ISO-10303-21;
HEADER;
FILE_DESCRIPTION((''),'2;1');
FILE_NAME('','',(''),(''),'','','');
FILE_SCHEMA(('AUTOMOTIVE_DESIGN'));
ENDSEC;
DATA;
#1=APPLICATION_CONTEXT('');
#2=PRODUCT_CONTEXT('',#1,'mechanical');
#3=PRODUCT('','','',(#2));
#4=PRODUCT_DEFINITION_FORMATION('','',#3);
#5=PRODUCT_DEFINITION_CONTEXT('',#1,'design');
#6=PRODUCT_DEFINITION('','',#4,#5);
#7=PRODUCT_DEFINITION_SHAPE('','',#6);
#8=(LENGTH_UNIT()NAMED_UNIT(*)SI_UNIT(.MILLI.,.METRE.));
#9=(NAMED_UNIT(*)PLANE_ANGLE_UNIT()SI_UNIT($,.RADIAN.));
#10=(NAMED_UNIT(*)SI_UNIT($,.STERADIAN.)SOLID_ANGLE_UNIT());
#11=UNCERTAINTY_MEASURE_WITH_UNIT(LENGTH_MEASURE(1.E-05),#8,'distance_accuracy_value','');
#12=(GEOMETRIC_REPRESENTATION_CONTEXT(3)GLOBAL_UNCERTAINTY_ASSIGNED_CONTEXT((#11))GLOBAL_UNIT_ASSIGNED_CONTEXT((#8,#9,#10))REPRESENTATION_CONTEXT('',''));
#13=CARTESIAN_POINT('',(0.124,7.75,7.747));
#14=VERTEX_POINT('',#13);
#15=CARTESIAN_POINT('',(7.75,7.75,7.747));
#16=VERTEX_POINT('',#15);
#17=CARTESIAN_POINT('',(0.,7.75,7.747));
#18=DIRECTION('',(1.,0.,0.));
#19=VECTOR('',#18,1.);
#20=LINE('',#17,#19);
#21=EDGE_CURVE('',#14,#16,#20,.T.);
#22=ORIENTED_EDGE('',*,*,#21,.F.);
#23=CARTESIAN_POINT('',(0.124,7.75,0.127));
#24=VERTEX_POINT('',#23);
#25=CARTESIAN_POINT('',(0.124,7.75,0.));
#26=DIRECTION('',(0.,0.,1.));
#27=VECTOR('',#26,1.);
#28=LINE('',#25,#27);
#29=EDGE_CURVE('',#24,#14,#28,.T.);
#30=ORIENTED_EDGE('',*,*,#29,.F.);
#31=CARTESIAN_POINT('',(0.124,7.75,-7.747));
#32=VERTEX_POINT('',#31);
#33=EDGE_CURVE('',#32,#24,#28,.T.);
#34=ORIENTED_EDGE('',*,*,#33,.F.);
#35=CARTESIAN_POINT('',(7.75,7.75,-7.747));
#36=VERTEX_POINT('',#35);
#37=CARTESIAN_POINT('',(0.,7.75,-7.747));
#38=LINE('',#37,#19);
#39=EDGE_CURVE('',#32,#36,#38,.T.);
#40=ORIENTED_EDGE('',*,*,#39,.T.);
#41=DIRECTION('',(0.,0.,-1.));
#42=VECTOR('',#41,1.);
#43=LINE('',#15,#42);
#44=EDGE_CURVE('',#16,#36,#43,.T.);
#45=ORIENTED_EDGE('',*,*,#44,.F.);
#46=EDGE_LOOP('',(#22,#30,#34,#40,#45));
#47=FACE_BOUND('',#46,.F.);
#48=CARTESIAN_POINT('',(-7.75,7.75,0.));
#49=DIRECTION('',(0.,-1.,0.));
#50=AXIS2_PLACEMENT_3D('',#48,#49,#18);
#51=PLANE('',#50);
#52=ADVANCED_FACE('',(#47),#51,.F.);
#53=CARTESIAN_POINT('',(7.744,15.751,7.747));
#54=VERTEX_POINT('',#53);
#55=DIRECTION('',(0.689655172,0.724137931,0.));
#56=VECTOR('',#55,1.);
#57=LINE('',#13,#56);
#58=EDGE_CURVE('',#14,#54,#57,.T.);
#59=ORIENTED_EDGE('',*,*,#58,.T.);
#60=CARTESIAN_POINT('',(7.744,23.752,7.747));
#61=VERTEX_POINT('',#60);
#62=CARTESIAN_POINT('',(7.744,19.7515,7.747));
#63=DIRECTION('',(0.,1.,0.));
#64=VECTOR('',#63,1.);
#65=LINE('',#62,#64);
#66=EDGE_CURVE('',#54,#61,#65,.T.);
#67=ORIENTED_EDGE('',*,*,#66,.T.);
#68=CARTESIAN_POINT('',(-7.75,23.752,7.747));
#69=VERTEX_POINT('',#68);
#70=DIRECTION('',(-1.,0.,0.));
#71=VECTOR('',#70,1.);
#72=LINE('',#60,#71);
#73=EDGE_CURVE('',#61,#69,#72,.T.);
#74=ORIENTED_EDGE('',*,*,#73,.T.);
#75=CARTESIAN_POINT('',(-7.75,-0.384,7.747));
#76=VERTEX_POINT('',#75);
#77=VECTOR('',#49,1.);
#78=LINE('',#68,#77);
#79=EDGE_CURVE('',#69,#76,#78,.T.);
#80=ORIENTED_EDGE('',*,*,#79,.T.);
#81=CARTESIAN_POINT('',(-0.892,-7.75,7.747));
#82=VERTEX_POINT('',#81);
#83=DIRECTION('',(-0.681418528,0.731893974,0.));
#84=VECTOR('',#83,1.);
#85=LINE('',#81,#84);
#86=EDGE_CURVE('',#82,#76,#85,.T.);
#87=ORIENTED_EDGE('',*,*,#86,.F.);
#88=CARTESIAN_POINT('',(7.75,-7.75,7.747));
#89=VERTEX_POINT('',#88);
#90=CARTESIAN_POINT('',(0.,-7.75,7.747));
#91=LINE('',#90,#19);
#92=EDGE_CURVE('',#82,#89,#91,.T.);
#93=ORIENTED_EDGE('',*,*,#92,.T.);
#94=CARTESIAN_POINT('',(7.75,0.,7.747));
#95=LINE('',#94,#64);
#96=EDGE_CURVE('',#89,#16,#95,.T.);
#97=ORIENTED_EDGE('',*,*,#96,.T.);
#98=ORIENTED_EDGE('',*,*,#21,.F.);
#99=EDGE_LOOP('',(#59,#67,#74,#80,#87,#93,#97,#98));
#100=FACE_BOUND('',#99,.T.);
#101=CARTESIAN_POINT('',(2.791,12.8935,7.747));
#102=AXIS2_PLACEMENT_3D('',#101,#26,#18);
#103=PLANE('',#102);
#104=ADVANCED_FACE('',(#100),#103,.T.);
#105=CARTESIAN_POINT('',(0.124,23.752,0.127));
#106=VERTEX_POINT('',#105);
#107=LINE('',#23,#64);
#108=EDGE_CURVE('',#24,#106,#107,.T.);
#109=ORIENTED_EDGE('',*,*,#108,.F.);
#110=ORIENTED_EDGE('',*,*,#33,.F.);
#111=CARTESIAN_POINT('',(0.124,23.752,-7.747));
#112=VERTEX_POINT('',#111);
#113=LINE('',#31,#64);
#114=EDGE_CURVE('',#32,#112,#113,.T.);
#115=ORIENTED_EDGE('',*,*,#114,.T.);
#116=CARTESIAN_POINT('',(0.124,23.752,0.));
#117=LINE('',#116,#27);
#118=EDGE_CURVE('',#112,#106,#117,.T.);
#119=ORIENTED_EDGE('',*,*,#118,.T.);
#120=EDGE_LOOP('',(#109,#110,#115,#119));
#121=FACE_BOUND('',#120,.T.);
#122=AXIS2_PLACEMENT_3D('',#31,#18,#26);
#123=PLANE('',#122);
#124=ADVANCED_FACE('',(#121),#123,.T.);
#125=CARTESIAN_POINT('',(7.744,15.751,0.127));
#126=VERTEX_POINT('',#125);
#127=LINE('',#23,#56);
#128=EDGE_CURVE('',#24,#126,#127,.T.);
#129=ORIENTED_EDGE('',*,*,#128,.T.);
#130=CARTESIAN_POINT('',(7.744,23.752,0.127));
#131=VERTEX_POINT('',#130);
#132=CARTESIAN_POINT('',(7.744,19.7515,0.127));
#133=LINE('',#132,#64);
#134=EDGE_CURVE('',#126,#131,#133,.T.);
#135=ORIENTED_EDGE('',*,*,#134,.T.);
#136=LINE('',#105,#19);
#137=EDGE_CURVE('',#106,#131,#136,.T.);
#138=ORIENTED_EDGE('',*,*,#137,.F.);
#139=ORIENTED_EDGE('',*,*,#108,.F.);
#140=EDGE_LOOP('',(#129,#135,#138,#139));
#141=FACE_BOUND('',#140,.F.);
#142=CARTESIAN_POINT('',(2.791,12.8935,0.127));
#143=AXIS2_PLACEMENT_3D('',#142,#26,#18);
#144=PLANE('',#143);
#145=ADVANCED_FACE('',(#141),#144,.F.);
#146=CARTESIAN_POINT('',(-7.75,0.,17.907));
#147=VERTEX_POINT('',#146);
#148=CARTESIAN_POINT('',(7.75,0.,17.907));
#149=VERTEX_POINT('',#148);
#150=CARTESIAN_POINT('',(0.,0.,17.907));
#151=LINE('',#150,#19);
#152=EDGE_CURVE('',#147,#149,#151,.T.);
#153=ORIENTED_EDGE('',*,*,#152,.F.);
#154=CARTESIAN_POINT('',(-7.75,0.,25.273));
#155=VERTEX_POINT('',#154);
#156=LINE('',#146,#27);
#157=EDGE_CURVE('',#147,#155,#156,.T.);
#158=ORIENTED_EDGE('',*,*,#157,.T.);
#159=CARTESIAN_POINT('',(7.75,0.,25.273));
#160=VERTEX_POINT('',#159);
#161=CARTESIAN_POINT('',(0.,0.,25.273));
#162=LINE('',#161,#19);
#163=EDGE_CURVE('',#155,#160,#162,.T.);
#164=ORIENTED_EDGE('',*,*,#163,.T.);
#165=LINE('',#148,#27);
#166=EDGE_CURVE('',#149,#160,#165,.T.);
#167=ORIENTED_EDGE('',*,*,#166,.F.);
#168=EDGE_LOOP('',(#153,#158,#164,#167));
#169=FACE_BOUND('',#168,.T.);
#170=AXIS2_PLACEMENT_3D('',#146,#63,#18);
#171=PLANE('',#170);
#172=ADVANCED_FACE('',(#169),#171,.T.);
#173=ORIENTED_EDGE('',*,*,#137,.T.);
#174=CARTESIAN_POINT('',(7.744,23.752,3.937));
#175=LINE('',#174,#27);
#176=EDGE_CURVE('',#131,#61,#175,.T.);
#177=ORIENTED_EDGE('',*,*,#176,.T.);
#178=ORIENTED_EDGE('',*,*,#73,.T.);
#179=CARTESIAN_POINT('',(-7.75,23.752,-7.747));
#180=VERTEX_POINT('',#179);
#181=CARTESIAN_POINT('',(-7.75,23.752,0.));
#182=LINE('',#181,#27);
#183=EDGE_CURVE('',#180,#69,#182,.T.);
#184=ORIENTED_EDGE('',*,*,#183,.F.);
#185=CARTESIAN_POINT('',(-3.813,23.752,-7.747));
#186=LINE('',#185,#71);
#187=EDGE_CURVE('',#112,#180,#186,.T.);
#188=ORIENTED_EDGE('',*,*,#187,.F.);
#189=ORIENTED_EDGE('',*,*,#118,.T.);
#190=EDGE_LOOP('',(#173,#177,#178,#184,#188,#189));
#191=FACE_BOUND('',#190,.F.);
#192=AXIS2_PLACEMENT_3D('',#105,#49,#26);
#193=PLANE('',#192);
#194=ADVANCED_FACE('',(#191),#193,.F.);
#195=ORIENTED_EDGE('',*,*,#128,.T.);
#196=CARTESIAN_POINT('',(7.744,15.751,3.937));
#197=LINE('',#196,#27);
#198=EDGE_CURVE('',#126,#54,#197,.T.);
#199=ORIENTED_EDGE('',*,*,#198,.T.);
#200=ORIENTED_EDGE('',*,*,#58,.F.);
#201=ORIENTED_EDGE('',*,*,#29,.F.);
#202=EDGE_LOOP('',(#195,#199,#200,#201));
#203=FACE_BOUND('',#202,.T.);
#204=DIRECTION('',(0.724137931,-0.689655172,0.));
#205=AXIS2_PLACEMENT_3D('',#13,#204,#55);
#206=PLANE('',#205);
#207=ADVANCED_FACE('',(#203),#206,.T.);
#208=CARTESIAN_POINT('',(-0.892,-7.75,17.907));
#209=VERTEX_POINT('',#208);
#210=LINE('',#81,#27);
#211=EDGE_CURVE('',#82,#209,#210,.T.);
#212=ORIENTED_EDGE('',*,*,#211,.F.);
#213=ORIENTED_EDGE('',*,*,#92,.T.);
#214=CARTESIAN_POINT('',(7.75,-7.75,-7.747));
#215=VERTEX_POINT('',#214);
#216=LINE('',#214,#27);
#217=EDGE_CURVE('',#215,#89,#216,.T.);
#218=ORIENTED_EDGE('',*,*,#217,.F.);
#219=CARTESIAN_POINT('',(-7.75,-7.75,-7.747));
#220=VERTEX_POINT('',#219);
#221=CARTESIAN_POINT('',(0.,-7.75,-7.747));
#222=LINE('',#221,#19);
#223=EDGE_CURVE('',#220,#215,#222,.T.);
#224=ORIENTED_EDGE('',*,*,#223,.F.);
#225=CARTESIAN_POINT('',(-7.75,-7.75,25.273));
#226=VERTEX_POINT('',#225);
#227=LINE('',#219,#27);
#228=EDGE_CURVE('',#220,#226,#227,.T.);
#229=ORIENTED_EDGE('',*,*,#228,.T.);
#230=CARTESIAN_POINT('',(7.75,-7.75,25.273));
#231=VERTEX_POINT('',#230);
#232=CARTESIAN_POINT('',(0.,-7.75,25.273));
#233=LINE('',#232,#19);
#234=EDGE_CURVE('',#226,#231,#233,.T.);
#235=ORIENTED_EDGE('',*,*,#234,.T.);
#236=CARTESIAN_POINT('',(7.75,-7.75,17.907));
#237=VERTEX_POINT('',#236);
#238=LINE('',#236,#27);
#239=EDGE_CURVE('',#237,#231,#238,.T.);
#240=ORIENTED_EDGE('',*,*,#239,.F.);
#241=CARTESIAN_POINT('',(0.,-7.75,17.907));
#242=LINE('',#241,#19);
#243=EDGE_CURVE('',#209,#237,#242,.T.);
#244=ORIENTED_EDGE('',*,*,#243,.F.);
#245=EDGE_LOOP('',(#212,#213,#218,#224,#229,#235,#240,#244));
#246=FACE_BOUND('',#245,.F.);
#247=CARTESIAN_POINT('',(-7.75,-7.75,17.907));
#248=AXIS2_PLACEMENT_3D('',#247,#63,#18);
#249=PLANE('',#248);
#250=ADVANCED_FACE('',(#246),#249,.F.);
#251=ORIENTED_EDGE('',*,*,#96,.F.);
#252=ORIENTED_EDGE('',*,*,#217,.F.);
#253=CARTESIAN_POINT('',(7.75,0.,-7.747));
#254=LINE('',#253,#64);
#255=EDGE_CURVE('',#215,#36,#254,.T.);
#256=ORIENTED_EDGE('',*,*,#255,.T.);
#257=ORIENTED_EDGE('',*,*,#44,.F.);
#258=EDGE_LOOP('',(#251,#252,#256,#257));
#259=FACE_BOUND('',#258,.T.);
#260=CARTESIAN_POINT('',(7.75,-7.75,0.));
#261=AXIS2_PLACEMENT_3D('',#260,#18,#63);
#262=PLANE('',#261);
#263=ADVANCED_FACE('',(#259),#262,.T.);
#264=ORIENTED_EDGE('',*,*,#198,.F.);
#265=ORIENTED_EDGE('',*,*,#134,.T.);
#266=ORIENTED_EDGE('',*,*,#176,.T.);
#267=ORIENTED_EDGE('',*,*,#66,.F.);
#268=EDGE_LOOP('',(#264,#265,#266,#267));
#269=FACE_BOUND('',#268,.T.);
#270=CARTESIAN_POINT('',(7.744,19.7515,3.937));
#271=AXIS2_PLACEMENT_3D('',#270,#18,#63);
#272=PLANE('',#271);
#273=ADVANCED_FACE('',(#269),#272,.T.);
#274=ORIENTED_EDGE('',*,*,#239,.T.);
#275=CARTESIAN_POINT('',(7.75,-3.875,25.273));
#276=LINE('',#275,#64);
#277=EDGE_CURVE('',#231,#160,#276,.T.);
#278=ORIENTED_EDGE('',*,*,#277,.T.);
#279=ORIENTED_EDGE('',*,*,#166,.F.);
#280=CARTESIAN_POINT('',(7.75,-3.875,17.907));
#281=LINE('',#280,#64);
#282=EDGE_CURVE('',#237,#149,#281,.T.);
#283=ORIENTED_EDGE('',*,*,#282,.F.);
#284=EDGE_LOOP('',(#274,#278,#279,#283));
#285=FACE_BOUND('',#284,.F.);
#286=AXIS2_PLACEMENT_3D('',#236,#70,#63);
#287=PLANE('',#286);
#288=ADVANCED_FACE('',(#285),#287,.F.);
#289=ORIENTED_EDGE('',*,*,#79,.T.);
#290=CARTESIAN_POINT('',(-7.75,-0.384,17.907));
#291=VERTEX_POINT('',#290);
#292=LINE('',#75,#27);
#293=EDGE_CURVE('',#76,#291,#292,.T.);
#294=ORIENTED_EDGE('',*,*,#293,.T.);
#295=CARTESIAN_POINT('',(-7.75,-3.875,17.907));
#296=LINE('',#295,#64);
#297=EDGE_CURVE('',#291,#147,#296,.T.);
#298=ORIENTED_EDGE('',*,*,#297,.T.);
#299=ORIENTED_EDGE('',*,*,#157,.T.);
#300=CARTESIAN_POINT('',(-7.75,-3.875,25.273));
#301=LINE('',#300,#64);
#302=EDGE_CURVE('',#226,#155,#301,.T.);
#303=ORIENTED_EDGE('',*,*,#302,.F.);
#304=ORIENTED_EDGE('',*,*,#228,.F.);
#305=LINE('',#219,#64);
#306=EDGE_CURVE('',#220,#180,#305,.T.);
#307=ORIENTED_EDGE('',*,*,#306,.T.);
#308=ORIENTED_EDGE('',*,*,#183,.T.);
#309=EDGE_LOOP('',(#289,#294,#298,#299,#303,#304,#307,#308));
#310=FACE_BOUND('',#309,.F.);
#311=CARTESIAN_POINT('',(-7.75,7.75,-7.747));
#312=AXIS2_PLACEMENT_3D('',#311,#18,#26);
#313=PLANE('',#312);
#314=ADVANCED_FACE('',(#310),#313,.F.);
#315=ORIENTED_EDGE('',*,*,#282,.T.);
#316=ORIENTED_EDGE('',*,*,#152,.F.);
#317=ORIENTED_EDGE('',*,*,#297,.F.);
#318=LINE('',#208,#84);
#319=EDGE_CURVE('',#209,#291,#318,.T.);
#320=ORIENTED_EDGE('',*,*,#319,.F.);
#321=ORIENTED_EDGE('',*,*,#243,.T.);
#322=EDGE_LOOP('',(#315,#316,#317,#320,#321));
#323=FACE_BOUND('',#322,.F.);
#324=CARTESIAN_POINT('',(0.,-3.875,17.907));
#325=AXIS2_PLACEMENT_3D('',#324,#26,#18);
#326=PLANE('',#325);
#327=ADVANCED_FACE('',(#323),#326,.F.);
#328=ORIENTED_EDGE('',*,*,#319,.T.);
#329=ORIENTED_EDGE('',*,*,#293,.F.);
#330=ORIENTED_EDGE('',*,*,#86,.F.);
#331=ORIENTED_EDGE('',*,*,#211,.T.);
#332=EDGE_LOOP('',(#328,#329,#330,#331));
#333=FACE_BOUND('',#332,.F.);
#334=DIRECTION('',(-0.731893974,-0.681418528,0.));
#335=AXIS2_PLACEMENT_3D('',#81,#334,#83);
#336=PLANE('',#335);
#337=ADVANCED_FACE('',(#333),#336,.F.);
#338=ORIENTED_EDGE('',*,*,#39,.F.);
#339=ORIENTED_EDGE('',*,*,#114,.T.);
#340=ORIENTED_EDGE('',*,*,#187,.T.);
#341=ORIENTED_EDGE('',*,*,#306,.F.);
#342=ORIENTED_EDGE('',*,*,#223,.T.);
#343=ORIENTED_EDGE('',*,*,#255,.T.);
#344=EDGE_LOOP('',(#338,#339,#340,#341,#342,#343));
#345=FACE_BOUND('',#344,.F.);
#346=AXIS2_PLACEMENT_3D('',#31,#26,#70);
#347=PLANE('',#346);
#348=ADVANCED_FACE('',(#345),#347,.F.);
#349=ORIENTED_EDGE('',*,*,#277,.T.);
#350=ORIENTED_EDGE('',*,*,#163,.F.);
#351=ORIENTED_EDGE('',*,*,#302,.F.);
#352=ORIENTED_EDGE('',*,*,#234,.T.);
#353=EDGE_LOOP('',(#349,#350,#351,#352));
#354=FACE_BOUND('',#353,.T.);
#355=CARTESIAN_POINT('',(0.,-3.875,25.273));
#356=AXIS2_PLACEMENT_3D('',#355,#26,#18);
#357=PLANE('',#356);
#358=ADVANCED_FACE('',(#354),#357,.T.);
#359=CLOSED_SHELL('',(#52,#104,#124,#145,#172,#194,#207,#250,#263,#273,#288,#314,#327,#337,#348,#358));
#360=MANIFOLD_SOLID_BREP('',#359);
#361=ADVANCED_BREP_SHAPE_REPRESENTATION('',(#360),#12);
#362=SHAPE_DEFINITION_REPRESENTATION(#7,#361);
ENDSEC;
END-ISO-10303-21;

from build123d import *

# Parameters (mm, degrees)
F0_W      = 15.5
F0_H      = 15.5
F1_DEPTH  = 7.747
F3_DEPTH  = 10.16
F4_W      = 15.5
F4_H      = 7.75
F5_DEPTH  = 7.366
F6_W      = 7.874
F6_H      = 15.494
F7_DEPTH  = 16.002
F8_W      = 8.001
F8_H      = 7.62
F9_DEPTH  = 7.62
F11_DEPTH = 7.62


with BuildPart() as f1:
    # F0 (on Top) → F1 (new body, symmetric)
    with BuildSketch(Plane.XY):
        Rectangle(F0_W, F0_H)
    extrude(amount=F1_DEPTH, both=True)

    # F2 (on face) → F3 (join)
    with BuildSketch(Plane.XY.offset(7.747)):
        Polygon((-7.75, -0.384), (-7.75, -7.75), (-0.892, -7.75), align=None)
    extrude(amount=F3_DEPTH)

    # F4 (on face) → F5 (join)
    with BuildSketch(Plane.XY.offset(17.907)):
        with Locations((0, -3.875)):
            Rectangle(F4_W, F4_H)
    extrude(amount=F5_DEPTH)

    # F6 (on face) → F7 (join)
    with BuildSketch(Plane(origin=(0, 7.75, 0), x_dir=(-1, 0, 0), z_dir=(0, 1, 0))):
        with Locations((3.813, 0)):
            Rectangle(F6_W, F6_H)
    extrude(amount=F7_DEPTH)

    # F8 (on face) → F9 (join)
    with BuildSketch(Plane.YZ.offset(0.124)):
        with Locations((19.7515, 3.937)):
            Rectangle(F8_W, F8_H)
    extrude(amount=F9_DEPTH)

    # F10 (on face) → F11 (join)
    with BuildSketch(Plane.XY.offset(7.747)):
        Polygon((0.124, 7.75), (7.744, 15.751), (0.124, 15.751), align=None)
    extrude(amount=-F11_DEPTH)


solid = f1.part
